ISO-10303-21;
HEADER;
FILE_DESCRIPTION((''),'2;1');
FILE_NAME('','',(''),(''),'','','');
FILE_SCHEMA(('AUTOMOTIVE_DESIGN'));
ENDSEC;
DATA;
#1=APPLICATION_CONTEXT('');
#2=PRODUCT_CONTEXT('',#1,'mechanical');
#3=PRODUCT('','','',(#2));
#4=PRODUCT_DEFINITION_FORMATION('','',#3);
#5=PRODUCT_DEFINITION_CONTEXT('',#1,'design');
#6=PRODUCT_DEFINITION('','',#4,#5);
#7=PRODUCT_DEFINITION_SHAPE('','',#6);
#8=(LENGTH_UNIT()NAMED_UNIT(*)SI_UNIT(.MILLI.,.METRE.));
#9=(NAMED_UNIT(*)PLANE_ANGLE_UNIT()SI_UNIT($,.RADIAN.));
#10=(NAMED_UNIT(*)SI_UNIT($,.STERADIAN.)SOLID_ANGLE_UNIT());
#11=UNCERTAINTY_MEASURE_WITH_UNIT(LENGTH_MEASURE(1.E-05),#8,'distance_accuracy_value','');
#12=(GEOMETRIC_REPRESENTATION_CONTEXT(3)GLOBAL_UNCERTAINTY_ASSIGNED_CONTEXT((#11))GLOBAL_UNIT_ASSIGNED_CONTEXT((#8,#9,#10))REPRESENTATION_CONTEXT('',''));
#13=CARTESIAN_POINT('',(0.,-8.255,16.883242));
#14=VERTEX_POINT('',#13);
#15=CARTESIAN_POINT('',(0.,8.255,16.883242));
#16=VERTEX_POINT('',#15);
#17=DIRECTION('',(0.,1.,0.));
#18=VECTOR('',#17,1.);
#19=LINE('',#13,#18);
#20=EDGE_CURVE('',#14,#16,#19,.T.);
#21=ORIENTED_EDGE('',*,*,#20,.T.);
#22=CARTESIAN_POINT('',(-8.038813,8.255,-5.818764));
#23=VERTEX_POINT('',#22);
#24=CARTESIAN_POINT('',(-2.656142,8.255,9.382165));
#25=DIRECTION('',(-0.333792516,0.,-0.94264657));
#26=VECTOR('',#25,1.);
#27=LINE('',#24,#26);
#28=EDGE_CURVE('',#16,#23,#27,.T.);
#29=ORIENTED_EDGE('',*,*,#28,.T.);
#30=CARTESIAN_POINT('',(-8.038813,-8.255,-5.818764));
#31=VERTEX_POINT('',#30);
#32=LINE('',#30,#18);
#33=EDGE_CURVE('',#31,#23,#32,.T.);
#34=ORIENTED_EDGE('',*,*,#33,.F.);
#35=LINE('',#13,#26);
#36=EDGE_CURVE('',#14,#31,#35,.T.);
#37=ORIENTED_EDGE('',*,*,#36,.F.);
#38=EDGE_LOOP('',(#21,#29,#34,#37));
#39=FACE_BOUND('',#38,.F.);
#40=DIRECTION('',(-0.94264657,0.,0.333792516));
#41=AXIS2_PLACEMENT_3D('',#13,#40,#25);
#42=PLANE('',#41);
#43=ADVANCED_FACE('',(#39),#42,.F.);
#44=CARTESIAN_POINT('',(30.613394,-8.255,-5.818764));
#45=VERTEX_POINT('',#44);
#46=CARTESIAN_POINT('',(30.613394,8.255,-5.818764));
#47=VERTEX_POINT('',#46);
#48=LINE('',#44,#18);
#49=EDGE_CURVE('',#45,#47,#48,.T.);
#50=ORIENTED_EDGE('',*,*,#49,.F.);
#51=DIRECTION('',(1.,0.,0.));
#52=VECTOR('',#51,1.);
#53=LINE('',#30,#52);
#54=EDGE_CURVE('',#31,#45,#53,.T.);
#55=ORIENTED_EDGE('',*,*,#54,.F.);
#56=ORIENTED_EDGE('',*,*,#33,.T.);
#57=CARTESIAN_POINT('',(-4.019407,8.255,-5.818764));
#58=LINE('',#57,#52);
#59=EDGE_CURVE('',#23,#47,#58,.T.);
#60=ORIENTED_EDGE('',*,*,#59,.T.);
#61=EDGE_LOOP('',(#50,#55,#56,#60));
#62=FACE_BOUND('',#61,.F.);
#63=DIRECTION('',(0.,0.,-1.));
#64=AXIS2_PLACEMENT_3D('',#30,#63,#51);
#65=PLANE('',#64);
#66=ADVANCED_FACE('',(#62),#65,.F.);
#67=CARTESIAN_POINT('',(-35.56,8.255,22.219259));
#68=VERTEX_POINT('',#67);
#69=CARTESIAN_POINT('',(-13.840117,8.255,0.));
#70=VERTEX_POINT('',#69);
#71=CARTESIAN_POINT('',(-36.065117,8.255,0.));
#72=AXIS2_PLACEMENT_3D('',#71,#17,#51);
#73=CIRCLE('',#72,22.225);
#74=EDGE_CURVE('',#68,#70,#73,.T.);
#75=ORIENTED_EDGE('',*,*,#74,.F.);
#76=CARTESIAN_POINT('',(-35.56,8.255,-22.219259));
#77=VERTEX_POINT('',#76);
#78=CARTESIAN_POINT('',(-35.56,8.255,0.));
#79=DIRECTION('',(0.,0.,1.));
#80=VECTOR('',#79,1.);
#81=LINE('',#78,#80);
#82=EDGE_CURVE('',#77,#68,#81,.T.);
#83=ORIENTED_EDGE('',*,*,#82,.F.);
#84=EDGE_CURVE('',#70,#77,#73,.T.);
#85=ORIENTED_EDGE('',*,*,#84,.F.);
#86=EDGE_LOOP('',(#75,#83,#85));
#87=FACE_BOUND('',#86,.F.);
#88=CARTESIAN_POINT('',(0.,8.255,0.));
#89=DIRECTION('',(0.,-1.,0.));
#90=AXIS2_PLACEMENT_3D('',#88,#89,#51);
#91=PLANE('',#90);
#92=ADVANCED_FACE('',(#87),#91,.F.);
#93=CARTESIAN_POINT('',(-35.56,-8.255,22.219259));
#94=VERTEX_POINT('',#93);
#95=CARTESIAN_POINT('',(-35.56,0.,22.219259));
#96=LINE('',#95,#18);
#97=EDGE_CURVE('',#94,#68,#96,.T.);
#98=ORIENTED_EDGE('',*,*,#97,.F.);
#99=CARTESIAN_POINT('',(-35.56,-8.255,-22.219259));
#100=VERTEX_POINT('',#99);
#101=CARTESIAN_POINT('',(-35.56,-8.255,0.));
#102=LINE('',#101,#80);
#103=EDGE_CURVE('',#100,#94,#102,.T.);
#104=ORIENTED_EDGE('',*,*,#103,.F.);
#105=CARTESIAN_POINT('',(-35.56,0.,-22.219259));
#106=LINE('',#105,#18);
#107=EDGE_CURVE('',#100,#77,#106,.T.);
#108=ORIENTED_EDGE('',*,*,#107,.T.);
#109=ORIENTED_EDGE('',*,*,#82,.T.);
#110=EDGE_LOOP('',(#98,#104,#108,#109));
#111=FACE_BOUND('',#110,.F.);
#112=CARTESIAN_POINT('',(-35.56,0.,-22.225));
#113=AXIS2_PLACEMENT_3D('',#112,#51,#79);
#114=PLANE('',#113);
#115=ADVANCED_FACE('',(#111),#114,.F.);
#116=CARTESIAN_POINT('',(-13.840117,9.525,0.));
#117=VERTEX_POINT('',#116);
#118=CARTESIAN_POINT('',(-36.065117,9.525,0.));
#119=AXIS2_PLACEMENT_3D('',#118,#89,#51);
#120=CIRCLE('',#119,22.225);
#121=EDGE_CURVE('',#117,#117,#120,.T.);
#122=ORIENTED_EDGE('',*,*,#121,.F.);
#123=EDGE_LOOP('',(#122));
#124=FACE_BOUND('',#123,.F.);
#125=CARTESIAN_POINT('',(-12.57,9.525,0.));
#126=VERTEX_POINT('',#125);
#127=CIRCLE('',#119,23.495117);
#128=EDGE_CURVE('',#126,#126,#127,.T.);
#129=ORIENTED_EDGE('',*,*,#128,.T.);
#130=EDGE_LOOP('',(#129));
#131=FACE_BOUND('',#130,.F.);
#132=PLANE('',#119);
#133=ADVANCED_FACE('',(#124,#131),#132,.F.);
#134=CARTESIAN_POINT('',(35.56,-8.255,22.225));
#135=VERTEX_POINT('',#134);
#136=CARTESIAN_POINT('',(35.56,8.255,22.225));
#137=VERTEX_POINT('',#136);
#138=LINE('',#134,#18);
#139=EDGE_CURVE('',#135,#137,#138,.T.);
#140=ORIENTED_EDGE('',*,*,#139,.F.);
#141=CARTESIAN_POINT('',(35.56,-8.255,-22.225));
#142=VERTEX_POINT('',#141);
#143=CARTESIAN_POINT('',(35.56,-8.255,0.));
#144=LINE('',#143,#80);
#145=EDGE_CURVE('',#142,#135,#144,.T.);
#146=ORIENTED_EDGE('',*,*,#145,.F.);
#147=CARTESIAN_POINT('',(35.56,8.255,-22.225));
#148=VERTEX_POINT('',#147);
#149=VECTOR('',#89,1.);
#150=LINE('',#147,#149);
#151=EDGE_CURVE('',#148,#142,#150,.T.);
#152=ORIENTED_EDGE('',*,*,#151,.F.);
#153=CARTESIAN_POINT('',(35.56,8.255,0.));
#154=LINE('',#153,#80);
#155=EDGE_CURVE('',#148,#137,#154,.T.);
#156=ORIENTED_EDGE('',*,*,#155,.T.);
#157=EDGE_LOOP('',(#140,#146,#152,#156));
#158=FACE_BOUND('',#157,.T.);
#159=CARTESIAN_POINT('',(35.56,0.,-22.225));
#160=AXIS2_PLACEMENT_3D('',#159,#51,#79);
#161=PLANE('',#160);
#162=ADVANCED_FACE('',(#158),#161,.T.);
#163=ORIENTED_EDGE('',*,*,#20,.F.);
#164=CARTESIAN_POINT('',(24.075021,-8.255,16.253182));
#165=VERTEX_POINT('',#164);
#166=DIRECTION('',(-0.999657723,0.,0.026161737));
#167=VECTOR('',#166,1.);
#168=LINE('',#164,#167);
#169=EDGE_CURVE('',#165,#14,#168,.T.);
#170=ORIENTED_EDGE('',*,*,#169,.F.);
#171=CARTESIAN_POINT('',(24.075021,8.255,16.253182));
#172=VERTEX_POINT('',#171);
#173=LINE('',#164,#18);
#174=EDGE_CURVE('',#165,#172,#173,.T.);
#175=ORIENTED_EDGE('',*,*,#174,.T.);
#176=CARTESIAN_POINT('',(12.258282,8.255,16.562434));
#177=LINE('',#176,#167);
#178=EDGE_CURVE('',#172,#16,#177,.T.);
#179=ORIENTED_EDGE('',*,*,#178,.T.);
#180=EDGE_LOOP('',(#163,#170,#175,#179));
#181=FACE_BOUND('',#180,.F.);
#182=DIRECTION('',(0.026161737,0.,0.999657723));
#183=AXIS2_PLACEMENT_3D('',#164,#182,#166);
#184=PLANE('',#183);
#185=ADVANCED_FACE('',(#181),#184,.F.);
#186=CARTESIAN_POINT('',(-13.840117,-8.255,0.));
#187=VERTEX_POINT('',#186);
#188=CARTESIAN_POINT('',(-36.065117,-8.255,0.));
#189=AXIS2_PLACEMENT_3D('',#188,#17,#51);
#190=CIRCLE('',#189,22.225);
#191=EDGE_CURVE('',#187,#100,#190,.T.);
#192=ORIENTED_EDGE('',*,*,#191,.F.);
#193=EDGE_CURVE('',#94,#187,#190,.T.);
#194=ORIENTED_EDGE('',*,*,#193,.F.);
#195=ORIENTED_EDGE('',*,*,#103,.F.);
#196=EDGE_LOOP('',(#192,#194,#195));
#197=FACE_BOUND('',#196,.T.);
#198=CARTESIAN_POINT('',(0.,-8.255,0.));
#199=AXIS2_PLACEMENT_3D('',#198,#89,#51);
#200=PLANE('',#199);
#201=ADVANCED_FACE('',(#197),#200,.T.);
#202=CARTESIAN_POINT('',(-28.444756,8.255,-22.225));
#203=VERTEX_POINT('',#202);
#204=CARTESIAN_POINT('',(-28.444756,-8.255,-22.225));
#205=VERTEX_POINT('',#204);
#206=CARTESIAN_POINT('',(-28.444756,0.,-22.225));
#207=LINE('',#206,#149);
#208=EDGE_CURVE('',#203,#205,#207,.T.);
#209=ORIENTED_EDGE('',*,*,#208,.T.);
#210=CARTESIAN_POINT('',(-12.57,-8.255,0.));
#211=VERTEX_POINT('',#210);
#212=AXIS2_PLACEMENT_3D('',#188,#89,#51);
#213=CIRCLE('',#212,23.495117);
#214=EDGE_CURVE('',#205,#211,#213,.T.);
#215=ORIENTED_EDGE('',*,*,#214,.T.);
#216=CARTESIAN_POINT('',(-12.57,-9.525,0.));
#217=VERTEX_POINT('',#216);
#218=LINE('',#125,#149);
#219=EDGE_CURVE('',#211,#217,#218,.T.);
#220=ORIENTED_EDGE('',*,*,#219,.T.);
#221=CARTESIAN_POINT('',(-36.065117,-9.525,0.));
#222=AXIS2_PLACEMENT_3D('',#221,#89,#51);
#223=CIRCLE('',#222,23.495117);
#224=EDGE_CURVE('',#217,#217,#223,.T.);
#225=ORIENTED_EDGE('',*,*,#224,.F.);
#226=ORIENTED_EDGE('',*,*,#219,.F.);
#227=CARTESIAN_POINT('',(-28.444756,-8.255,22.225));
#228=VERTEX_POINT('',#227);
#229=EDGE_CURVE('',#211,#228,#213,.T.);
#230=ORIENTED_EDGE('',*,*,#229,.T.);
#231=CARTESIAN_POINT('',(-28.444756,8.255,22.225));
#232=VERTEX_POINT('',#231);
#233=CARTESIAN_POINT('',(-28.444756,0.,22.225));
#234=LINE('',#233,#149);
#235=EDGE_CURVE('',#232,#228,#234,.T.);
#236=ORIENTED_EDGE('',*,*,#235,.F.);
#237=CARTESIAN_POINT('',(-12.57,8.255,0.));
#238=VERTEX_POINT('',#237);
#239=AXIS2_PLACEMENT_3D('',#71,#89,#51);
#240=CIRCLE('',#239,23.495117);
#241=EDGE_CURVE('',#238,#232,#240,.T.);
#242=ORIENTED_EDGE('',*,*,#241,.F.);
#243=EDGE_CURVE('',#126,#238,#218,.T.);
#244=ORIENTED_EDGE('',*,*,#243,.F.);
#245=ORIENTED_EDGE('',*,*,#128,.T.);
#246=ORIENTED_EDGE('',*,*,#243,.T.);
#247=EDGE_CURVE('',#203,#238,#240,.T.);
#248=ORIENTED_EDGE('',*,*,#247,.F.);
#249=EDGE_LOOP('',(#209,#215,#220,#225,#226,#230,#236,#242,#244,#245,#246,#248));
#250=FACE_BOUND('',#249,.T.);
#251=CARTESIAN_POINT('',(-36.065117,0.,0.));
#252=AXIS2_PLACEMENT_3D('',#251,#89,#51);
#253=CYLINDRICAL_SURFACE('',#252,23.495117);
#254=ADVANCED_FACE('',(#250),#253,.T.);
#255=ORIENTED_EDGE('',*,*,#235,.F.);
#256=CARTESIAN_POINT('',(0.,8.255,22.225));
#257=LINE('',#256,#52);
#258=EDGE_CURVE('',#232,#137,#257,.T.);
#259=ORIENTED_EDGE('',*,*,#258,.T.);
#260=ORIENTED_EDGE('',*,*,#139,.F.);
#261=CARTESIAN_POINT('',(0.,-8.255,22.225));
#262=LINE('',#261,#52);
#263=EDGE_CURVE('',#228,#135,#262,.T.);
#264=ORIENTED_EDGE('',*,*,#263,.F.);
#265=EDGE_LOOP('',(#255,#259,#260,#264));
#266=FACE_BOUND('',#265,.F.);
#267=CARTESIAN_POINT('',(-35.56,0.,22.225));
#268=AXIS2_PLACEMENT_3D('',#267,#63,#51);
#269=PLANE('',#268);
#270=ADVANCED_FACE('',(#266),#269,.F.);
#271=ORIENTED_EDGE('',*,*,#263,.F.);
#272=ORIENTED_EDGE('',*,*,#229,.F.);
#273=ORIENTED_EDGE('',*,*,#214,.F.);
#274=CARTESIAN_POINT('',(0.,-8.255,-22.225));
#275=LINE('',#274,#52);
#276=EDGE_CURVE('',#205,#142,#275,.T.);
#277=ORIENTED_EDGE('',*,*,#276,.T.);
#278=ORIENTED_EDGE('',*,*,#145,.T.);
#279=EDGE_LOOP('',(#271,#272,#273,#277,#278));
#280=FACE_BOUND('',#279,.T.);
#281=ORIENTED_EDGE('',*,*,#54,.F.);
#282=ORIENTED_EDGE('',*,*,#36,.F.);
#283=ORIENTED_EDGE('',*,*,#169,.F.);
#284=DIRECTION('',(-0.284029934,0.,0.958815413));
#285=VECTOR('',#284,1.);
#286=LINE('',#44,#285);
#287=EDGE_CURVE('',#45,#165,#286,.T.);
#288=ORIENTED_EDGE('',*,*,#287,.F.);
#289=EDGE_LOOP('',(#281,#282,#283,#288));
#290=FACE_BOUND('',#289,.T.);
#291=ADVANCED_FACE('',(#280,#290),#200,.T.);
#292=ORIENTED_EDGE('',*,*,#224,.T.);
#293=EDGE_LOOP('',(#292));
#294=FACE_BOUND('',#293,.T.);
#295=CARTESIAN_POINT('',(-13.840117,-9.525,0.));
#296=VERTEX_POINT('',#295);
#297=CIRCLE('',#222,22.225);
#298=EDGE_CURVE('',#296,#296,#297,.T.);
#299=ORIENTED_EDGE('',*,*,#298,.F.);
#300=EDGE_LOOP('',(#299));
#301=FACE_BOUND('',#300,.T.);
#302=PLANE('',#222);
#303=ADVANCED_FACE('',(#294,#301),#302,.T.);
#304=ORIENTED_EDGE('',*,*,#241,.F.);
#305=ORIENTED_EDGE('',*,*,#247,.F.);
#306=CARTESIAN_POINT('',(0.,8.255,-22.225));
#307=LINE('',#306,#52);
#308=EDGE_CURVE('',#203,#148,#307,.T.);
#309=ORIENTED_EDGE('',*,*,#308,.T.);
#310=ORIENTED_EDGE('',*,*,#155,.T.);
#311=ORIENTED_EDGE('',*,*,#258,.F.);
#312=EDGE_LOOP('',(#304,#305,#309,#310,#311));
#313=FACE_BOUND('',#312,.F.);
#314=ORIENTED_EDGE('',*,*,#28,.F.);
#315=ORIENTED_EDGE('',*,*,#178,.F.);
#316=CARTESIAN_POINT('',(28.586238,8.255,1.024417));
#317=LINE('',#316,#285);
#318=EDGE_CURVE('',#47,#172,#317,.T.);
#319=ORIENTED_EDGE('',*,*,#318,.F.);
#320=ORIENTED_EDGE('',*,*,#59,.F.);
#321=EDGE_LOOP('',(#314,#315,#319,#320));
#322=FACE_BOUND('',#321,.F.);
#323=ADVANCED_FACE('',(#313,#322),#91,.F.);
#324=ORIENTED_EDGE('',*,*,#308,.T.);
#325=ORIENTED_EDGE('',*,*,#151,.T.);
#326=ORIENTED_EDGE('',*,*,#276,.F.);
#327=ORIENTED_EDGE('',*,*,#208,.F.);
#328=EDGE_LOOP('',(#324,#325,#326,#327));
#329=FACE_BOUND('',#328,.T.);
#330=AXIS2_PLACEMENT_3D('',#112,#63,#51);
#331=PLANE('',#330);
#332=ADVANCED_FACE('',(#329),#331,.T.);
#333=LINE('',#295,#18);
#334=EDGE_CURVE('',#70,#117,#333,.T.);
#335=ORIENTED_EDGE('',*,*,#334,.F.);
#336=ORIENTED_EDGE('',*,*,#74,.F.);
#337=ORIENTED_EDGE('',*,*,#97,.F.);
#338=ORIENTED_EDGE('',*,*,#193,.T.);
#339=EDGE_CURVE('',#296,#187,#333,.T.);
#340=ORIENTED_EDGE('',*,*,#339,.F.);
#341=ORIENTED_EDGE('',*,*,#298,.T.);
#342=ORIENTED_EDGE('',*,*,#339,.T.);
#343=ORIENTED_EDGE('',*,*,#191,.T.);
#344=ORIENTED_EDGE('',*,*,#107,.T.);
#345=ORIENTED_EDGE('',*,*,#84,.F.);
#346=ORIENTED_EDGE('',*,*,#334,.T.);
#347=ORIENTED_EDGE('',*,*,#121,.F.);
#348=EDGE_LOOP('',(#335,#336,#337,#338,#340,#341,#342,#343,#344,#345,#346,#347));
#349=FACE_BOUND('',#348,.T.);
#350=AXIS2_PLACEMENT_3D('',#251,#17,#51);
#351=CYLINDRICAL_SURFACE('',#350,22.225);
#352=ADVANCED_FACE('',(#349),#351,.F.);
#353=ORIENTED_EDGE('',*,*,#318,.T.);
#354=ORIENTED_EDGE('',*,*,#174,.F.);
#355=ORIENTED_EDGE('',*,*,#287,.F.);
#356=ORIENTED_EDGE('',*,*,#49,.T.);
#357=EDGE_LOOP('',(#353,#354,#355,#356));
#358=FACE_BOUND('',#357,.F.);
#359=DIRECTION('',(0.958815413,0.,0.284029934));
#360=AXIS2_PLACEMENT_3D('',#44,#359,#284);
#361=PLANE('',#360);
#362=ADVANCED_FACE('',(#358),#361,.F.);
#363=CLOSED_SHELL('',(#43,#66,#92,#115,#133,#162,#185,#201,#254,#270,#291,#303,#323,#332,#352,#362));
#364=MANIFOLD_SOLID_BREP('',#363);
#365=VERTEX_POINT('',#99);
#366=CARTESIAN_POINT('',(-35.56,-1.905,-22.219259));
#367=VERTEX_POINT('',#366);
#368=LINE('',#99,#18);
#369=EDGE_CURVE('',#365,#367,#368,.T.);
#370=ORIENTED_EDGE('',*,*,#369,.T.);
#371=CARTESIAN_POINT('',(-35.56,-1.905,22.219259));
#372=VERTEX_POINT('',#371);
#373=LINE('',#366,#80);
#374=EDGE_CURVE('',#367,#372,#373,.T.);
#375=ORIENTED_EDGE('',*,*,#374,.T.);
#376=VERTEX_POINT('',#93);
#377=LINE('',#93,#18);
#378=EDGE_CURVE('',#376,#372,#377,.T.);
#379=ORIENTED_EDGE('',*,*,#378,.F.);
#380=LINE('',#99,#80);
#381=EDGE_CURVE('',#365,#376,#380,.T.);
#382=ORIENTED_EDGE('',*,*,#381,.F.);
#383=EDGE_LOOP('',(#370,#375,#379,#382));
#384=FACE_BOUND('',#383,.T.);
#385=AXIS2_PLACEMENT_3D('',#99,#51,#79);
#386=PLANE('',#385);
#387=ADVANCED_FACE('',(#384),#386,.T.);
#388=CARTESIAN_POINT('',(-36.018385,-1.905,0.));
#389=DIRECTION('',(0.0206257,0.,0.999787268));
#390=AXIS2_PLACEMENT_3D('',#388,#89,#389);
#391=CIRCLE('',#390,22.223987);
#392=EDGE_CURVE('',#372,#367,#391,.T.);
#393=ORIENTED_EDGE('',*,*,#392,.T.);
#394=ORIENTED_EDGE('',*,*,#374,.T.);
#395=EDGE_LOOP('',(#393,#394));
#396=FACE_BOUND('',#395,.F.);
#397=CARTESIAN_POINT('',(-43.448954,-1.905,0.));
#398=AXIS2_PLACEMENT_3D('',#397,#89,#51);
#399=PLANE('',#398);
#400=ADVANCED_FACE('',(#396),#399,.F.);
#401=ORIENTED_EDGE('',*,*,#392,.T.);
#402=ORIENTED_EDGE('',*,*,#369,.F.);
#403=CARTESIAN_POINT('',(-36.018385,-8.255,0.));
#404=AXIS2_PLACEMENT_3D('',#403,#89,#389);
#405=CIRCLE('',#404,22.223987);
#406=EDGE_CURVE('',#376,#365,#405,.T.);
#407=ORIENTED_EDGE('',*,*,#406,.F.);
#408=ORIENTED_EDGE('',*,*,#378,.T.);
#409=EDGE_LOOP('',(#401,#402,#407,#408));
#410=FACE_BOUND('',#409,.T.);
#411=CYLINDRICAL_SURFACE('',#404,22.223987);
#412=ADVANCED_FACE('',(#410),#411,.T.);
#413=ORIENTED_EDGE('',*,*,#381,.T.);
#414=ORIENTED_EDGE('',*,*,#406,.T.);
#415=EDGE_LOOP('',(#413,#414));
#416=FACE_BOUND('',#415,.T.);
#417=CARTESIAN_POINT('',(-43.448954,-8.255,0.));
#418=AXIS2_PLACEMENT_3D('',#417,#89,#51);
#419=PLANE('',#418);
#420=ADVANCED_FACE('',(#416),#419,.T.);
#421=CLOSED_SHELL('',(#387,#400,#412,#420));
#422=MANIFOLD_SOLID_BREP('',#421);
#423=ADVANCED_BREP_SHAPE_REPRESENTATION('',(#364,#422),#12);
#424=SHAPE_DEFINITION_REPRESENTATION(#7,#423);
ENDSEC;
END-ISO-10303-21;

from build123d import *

# Parameters (mm, degrees)
F1_R     = 23.4951168528
F1_R_2   = 22.225
F2_DEPTH = 9.525
F0_W     = 71.12
F0_H     = 44.45
F3_DEPTH = 8.255
F5_DEPTH = 6.35
F7_DEPTH = 17.781


# Not quite as in the source:
# - the program builds the solid bodies; features that only make, move or delete a surface that nothing else refers to are left out


with BuildPart() as f2:
    # F1 (on Front) → F2 (new body, symmetric)
    with BuildSketch(Plane.XZ):
        with Locations((-36.0651165247, 0)):
            Circle(F1_R)
        with Locations((-36.0651165247, 0)):
            Circle(F1_R_2, mode=Mode.SUBTRACT)
    extrude(amount=F2_DEPTH, both=True)

    # F0 (on Front) → F3 (join, symmetric)
    with BuildSketch(Plane.XZ):
        Rectangle(F0_W, F0_H)
    extrude(amount=F3_DEPTH, both=True)

    # F6 (on face) → F7 (cut, through all)
    with BuildSketch(Plane.XZ.offset(8.255)):
        Polygon((0, 16.8832416568), (-8.0388132402, -5.8187644509), (30.6133943614, -5.8187644509), (24.0750207475, 16.2531816351), align=None)
    extrude(amount=-F7_DEPTH, mode=Mode.SUBTRACT)


with BuildPart() as f5:
    # F4 (on face) → F5 (new body)
    with BuildSketch(Plane.XZ.offset(8.255)):
        with BuildLine():
            Line((-35.56, -22.2192592653), (-35.56, 22.2192592653))
            ThreePointArc((-35.56, 22.2192592653), (-58.242372306, 0), (-35.56, -22.2192592653))
        make_face()
    extrude(amount=-F5_DEPTH)


solid = Compound([f2.part, f5.part])
